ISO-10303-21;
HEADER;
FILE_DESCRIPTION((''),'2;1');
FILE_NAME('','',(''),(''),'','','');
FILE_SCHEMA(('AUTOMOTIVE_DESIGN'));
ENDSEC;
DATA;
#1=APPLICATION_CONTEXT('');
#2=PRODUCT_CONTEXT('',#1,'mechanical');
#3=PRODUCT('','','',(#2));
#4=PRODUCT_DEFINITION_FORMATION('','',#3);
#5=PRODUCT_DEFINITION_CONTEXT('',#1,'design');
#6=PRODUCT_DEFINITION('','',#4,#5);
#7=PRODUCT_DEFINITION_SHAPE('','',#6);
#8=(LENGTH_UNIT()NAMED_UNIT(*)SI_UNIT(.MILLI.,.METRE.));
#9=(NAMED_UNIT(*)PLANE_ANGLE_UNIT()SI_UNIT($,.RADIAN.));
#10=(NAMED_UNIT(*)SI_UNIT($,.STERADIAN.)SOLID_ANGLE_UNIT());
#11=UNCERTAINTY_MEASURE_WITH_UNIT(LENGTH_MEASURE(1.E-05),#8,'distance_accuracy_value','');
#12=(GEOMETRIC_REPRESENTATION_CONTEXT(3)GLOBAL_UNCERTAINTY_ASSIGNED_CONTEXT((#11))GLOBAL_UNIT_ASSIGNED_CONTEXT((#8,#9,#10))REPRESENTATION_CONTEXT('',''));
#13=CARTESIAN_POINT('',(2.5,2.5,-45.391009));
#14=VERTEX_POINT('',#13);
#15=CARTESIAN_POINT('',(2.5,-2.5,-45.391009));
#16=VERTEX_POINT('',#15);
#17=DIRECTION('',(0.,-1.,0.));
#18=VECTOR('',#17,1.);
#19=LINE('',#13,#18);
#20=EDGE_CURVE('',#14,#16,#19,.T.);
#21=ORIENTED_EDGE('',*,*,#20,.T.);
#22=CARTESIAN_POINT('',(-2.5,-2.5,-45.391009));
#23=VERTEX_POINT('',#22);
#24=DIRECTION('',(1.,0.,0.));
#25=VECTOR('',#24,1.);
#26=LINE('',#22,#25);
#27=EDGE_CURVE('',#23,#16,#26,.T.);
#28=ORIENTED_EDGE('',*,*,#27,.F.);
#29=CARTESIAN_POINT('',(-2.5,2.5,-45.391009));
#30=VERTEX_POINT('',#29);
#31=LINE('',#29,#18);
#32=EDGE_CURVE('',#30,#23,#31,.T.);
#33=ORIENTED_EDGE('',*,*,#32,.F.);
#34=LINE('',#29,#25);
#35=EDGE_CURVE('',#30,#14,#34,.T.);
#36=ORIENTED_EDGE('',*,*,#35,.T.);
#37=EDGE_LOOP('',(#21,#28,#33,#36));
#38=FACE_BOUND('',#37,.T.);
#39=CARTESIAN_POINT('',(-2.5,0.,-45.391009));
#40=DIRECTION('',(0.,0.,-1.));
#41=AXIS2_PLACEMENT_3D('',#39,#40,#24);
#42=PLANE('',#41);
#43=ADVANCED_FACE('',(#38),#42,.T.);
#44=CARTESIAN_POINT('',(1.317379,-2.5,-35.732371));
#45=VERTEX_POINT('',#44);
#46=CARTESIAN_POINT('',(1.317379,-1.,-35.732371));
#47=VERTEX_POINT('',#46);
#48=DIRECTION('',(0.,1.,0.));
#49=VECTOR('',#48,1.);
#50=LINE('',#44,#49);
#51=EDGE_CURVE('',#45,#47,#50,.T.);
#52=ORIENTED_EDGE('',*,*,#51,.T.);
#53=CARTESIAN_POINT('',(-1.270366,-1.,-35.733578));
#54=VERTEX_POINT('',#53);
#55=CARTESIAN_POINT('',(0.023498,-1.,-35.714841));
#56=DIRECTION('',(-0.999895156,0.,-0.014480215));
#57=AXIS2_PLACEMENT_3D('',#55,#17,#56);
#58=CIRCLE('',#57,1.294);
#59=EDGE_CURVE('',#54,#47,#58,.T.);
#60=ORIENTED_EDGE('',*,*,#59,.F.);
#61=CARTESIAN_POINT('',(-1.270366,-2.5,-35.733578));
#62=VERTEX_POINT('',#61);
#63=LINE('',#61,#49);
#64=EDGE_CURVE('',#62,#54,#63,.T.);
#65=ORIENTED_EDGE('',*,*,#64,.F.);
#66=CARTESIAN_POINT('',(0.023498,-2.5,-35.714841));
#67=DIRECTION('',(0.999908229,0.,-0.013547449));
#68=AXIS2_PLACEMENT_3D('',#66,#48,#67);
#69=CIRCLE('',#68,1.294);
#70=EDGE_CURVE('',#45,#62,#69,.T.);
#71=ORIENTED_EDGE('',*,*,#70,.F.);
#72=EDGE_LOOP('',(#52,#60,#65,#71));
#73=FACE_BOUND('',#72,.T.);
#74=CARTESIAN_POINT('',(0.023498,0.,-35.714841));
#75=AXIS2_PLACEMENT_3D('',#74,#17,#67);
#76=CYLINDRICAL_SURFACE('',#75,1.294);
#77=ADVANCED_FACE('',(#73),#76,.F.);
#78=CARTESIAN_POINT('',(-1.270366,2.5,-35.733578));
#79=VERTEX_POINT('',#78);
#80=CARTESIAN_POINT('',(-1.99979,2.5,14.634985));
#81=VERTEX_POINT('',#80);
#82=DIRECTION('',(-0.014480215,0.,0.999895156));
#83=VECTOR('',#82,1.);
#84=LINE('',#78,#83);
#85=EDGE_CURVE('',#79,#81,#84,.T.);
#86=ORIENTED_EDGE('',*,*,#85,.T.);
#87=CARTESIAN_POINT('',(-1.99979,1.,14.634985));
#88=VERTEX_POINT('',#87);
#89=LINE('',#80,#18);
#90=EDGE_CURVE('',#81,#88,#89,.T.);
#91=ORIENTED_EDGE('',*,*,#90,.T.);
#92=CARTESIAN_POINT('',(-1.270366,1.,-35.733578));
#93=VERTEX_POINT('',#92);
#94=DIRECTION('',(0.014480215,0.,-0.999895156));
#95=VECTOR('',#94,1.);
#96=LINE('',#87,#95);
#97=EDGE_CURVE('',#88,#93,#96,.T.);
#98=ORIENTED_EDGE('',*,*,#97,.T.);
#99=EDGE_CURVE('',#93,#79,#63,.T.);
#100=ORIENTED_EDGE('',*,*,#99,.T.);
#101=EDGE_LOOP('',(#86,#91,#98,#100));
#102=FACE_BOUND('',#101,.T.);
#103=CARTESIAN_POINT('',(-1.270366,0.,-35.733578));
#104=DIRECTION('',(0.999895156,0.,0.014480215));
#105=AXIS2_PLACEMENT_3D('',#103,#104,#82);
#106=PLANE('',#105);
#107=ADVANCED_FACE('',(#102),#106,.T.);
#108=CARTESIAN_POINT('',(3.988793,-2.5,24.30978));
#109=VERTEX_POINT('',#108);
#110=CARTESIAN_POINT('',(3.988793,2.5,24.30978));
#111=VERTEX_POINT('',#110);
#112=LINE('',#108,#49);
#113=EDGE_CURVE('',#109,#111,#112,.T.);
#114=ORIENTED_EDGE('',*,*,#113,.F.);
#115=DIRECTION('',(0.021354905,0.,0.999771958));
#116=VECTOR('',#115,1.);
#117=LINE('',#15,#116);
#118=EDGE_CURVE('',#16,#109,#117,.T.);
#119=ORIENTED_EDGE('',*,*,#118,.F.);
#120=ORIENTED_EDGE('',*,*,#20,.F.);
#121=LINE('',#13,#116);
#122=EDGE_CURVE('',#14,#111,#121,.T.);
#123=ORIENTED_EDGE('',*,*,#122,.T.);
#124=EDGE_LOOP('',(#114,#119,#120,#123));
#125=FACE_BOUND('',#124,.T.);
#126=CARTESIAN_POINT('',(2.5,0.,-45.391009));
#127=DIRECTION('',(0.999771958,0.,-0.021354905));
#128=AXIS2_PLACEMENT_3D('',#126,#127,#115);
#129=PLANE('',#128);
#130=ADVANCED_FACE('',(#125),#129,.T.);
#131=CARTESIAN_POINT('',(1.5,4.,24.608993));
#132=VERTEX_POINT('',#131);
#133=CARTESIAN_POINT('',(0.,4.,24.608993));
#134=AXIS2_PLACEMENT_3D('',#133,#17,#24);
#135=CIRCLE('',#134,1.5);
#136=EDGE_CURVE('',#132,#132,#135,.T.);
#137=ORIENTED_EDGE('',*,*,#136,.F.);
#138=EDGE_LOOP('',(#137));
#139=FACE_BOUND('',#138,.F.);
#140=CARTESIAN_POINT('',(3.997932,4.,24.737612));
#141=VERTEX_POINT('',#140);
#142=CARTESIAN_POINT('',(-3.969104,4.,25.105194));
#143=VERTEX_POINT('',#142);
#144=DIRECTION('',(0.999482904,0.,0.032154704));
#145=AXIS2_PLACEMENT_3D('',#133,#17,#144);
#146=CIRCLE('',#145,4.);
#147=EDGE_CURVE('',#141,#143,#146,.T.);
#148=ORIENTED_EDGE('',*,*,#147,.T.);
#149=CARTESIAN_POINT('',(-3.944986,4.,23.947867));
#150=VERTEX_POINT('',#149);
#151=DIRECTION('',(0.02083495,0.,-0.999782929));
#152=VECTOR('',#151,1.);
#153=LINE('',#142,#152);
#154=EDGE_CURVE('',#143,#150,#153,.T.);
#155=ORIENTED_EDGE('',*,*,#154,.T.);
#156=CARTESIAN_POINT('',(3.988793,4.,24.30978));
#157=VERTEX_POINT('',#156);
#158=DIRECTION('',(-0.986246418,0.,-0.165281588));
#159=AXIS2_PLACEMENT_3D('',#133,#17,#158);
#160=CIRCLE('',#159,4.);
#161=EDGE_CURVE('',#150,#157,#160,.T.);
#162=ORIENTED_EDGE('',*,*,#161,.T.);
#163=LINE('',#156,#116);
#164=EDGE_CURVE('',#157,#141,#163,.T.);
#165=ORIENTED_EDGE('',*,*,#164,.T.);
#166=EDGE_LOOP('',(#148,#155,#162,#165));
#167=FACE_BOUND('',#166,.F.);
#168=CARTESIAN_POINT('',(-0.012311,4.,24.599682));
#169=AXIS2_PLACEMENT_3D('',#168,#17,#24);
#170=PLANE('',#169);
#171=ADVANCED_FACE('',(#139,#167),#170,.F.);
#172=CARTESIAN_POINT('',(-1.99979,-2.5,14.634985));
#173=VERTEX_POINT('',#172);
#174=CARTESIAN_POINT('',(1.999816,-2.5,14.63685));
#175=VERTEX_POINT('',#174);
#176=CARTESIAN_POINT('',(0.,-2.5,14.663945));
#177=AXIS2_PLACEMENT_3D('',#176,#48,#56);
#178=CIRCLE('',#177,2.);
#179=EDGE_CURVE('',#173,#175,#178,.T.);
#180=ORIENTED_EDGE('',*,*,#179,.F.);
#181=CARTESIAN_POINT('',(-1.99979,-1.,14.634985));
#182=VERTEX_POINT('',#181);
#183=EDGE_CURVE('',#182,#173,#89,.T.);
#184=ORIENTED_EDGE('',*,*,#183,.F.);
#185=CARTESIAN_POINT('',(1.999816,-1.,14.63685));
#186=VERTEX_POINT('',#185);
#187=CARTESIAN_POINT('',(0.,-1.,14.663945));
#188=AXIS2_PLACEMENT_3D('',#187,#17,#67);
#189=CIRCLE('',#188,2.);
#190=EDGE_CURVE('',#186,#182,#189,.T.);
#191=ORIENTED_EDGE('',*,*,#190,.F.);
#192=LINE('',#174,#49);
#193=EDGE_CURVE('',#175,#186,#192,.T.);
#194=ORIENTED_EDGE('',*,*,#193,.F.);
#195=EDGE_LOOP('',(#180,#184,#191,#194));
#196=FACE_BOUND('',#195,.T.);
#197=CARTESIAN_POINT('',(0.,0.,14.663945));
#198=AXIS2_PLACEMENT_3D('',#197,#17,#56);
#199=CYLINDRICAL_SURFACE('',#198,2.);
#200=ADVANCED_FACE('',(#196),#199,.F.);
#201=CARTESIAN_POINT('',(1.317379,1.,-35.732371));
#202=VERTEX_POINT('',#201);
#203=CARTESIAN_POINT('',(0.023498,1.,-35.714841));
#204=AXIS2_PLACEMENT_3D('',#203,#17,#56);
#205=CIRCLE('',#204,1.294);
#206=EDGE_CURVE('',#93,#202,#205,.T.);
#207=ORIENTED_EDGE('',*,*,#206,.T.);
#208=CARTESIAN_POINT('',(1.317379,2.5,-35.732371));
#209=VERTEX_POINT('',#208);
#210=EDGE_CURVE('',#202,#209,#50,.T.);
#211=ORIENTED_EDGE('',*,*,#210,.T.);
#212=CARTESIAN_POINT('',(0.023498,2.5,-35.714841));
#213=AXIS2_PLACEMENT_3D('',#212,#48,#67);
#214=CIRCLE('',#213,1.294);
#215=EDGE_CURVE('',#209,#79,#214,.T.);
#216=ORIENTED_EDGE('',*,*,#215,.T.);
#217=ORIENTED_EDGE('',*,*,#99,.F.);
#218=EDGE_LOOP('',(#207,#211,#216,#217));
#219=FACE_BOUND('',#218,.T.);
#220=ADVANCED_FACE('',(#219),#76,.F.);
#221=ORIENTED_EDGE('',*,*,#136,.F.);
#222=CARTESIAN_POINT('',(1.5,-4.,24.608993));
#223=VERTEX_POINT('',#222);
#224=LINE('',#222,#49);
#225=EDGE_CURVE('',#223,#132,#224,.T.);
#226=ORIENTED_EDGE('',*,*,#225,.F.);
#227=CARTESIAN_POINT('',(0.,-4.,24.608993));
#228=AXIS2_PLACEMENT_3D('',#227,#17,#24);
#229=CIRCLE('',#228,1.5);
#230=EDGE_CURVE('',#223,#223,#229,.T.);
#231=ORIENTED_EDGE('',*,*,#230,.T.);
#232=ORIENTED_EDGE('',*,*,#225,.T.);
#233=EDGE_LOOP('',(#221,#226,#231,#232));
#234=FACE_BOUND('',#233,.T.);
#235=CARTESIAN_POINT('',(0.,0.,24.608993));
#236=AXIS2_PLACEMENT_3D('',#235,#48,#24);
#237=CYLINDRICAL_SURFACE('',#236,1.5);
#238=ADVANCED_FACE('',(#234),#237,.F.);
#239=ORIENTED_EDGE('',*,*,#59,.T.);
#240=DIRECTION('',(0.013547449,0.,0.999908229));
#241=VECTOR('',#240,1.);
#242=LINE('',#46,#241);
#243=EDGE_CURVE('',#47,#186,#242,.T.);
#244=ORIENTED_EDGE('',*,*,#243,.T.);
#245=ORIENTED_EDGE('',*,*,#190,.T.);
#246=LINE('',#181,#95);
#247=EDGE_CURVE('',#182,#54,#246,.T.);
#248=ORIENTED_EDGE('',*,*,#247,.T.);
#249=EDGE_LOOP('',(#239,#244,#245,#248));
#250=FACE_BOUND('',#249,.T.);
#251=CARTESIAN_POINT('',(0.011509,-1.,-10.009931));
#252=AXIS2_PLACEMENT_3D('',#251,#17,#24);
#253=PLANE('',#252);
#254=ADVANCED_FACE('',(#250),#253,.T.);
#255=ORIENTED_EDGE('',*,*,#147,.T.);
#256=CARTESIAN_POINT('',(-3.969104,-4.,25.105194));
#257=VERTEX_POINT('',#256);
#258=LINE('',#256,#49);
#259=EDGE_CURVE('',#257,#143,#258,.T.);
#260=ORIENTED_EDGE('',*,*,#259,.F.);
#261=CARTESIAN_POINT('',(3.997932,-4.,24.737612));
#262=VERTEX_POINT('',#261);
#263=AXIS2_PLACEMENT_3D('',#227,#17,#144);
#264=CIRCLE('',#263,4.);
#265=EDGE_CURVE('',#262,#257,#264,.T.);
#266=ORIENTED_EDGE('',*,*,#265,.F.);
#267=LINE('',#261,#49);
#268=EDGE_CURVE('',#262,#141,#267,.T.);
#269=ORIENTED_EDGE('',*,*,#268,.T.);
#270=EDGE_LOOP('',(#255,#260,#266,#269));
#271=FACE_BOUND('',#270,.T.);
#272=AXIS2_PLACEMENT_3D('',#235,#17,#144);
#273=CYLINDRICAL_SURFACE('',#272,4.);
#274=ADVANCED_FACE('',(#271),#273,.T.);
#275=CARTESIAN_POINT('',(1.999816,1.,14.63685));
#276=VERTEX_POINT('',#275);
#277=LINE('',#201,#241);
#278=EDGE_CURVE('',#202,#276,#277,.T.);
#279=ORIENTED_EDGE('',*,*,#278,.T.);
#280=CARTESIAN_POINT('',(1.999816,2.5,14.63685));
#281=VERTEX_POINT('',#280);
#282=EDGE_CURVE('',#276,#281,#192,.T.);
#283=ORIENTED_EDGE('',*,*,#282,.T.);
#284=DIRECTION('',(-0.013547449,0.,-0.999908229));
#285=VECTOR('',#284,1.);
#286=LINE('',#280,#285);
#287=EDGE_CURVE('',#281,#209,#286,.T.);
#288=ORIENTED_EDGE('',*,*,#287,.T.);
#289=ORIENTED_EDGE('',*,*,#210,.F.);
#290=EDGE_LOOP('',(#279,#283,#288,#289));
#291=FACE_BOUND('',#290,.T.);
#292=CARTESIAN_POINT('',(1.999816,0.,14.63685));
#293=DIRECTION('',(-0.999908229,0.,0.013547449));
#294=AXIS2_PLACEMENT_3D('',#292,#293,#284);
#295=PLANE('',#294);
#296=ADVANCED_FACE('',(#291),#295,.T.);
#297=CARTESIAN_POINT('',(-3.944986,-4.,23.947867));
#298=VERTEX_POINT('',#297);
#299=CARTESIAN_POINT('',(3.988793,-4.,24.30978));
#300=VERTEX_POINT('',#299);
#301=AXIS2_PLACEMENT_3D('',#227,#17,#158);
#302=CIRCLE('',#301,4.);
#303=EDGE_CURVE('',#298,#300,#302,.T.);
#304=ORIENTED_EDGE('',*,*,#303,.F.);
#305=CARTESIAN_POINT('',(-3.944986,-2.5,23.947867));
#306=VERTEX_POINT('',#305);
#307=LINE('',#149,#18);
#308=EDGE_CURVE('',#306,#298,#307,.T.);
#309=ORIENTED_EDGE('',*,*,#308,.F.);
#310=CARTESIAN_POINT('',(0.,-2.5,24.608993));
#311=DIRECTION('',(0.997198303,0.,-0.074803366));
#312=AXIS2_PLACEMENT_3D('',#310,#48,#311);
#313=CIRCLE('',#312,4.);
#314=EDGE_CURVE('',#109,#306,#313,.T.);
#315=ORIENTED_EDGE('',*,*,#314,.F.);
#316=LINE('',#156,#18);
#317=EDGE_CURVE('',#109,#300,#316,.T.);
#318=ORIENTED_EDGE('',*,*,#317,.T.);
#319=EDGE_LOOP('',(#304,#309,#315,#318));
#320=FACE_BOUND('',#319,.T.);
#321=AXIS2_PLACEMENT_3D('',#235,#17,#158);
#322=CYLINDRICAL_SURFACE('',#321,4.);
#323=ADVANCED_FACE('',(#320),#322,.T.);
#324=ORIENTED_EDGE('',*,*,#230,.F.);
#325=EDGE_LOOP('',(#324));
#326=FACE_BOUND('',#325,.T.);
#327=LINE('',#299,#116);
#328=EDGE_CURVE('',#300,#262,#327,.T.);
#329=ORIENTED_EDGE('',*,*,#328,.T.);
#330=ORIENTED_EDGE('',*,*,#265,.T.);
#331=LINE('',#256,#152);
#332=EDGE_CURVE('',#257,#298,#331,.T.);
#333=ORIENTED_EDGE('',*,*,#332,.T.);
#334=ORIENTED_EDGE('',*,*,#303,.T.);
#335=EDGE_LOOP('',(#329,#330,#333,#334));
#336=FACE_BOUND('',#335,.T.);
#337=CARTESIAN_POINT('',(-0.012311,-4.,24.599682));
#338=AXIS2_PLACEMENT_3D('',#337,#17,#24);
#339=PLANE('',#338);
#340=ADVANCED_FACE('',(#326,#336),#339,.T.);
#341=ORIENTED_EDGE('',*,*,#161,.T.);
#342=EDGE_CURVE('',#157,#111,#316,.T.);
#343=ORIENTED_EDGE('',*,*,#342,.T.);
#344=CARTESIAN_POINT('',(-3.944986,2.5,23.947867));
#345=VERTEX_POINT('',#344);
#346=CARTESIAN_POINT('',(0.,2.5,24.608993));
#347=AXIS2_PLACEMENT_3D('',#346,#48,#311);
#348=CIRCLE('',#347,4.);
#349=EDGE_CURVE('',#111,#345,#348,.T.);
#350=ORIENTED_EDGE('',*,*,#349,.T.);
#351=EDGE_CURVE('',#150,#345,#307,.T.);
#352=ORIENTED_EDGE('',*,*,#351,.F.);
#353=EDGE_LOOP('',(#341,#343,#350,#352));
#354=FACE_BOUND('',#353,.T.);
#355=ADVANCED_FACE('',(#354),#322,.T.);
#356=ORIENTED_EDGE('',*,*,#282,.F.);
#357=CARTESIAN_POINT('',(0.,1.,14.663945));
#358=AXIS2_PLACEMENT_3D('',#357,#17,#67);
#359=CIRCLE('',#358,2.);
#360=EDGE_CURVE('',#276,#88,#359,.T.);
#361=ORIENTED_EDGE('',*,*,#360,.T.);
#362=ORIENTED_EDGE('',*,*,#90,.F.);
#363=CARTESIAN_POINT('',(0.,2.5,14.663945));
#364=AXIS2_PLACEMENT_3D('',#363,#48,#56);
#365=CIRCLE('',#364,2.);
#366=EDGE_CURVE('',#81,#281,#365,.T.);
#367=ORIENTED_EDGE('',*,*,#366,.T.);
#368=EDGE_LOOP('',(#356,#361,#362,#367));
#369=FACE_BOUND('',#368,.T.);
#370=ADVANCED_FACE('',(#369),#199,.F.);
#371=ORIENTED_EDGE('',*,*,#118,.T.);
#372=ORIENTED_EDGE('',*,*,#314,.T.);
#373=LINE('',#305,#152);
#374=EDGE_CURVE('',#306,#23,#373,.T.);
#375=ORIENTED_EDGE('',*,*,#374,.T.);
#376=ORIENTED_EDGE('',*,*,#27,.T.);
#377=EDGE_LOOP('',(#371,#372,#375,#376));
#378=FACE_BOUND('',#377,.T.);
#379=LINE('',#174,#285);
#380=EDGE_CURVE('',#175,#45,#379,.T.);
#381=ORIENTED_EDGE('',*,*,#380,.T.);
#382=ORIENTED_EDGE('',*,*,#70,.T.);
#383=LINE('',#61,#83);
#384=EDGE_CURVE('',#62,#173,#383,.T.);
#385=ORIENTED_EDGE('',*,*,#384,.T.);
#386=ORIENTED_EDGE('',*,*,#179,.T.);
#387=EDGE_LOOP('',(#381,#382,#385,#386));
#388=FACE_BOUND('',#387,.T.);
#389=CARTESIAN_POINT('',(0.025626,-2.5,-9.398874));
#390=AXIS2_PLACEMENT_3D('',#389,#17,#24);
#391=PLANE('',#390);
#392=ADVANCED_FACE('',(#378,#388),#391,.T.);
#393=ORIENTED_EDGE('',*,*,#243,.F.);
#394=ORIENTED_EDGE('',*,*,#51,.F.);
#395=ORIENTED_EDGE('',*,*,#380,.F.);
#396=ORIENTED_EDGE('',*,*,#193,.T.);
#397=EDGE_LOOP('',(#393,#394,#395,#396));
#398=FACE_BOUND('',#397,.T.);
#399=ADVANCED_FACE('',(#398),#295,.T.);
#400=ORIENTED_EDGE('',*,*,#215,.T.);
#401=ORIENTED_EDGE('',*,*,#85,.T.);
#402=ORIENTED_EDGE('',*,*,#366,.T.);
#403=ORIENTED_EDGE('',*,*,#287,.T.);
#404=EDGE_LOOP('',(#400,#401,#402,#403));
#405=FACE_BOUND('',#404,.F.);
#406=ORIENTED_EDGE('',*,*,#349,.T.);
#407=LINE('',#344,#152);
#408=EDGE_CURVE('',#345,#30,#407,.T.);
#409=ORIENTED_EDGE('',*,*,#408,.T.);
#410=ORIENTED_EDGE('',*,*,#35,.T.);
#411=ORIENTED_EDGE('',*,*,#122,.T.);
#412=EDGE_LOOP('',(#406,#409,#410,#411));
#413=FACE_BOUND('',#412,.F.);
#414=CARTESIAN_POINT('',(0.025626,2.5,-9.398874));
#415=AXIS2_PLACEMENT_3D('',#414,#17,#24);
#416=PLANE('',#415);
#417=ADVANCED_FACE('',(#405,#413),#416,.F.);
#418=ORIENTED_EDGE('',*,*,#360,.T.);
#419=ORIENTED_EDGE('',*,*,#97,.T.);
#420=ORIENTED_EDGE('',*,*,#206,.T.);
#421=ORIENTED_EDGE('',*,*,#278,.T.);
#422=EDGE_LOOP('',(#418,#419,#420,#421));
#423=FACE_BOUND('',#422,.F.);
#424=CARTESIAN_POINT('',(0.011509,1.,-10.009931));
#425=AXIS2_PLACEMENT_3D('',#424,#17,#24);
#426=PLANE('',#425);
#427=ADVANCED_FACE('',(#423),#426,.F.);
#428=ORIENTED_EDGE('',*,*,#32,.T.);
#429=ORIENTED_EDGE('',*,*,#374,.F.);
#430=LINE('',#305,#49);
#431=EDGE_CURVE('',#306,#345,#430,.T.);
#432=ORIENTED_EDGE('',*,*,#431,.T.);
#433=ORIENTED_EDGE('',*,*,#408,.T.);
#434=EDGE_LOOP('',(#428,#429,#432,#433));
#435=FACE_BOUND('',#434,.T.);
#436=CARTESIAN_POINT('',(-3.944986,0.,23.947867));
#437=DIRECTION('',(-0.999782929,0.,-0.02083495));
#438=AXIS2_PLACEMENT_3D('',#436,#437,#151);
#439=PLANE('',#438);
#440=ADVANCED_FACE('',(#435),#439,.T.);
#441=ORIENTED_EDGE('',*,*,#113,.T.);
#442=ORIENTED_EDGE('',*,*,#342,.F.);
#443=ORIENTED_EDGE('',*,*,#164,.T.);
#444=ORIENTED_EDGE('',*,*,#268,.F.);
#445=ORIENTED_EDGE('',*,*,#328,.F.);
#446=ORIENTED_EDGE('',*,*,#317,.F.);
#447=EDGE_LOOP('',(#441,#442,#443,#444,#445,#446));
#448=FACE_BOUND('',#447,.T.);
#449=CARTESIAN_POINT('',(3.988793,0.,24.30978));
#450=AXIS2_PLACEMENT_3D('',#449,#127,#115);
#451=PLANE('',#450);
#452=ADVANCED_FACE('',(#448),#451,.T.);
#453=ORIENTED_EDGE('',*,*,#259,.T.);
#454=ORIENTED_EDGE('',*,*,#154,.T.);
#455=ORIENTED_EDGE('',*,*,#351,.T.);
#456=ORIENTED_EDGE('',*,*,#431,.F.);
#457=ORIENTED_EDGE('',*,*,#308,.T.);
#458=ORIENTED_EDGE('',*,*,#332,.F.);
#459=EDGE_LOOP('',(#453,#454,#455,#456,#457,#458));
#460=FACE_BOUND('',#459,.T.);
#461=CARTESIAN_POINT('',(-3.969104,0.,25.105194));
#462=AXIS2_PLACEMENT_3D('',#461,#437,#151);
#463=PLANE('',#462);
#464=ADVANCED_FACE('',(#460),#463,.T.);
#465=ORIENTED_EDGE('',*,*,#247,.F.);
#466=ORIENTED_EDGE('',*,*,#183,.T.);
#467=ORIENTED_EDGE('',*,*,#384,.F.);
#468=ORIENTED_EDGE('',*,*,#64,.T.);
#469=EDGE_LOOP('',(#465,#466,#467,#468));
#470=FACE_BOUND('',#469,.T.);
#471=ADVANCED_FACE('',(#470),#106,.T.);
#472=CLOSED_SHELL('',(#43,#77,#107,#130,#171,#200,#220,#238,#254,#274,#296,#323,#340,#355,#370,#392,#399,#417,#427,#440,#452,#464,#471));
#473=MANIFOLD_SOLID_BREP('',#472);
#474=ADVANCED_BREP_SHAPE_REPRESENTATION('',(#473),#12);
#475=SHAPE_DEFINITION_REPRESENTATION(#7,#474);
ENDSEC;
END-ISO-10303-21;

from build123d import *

# Parameters (mm, degrees)
F1_DEPTH = 2.5
F0_R     = 1.5
F2_DEPTH = 4
F3_DEPTH = 1


# Not quite as in the source:
# - a feature names something its author has since deleted; it is built from what else it names


with BuildPart() as f1:
    # F0 (on Front) → F1 (new body, symmetric)
    with BuildSketch(Plane.XZ):
        with BuildLine():
            Line((-3.9449856715, 23.9478669513), (-2.5, -45.3910091387))
            Line((-2.5, -45.3910091387), (2.5, -45.3910091387))
            Line((2.5, -45.3910091387), (3.9887932138, 24.3097798378))
            ThreePointArc((3.9887932138, 24.3097798378), (0.1822772875, 20.6131485868), (-3.9449856715, 23.9478669513))
        make_face()
        with BuildLine():
            ThreePointArc((-1.9997903124, 14.6349845216), (-0.0009328581, 16.6639447346), (1.9998164582, 14.6368500546))
            Line((1.9998164582, 14.6368500546), (1.3173793796, -35.7323714856))
            ThreePointArc((1.3173793796, -35.7323714856), (0.0241016903, -37.0088409461), (-1.270366201, -35.7335784854))
            Line((-1.270366201, -35.7335784854), (-1.9997903124, 14.6349845216))
        make_face(mode=Mode.SUBTRACT)
    extrude(amount=F1_DEPTH, both=True)

    # F0 (on Front) → F2 (join, symmetric)
    with BuildSketch(Plane.XZ):
        with BuildLine():
            Line((-3.9691037619, 25.1051941963), (-3.9449856715, 23.9478669513))
            ThreePointArc((-3.9449856715, 23.9478669513), (0.1822772875, 20.6131485868), (3.9887932138, 24.3097798378))
            Line((3.9887932138, 24.3097798378), (3.9979316153, 24.7376121165))
            ThreePointArc((3.9979316153, 24.7376121165), (0.184355384, 28.6047426804), (-3.9691037619, 25.1051941963))
        make_face()
        with Locations((0, 24.6089933023)):
            Circle(F0_R, mode=Mode.SUBTRACT)
    extrude(amount=F2_DEPTH, both=True)

    # F0 (on Front) → F3 (join, symmetric)
    with BuildSketch(Plane.XZ):
        with BuildLine():
            Line((1.3173793796, -35.7323714856), (1.9998164582, 14.6368500546))
            ThreePointArc((1.9998164582, 14.6368500546), (-0.0009328581, 16.6639447346), (-1.9997903124, 14.6349845216))
            Line((-1.9997903124, 14.6349845216), (-1.270366201, -35.7335784854))
            ThreePointArc((-1.270366201, -35.7335784854), (0.0241016903, -37.0088409461), (1.3173793796, -35.7323714856))
        make_face()
    extrude(amount=F3_DEPTH, both=True)


solid = f1.part
